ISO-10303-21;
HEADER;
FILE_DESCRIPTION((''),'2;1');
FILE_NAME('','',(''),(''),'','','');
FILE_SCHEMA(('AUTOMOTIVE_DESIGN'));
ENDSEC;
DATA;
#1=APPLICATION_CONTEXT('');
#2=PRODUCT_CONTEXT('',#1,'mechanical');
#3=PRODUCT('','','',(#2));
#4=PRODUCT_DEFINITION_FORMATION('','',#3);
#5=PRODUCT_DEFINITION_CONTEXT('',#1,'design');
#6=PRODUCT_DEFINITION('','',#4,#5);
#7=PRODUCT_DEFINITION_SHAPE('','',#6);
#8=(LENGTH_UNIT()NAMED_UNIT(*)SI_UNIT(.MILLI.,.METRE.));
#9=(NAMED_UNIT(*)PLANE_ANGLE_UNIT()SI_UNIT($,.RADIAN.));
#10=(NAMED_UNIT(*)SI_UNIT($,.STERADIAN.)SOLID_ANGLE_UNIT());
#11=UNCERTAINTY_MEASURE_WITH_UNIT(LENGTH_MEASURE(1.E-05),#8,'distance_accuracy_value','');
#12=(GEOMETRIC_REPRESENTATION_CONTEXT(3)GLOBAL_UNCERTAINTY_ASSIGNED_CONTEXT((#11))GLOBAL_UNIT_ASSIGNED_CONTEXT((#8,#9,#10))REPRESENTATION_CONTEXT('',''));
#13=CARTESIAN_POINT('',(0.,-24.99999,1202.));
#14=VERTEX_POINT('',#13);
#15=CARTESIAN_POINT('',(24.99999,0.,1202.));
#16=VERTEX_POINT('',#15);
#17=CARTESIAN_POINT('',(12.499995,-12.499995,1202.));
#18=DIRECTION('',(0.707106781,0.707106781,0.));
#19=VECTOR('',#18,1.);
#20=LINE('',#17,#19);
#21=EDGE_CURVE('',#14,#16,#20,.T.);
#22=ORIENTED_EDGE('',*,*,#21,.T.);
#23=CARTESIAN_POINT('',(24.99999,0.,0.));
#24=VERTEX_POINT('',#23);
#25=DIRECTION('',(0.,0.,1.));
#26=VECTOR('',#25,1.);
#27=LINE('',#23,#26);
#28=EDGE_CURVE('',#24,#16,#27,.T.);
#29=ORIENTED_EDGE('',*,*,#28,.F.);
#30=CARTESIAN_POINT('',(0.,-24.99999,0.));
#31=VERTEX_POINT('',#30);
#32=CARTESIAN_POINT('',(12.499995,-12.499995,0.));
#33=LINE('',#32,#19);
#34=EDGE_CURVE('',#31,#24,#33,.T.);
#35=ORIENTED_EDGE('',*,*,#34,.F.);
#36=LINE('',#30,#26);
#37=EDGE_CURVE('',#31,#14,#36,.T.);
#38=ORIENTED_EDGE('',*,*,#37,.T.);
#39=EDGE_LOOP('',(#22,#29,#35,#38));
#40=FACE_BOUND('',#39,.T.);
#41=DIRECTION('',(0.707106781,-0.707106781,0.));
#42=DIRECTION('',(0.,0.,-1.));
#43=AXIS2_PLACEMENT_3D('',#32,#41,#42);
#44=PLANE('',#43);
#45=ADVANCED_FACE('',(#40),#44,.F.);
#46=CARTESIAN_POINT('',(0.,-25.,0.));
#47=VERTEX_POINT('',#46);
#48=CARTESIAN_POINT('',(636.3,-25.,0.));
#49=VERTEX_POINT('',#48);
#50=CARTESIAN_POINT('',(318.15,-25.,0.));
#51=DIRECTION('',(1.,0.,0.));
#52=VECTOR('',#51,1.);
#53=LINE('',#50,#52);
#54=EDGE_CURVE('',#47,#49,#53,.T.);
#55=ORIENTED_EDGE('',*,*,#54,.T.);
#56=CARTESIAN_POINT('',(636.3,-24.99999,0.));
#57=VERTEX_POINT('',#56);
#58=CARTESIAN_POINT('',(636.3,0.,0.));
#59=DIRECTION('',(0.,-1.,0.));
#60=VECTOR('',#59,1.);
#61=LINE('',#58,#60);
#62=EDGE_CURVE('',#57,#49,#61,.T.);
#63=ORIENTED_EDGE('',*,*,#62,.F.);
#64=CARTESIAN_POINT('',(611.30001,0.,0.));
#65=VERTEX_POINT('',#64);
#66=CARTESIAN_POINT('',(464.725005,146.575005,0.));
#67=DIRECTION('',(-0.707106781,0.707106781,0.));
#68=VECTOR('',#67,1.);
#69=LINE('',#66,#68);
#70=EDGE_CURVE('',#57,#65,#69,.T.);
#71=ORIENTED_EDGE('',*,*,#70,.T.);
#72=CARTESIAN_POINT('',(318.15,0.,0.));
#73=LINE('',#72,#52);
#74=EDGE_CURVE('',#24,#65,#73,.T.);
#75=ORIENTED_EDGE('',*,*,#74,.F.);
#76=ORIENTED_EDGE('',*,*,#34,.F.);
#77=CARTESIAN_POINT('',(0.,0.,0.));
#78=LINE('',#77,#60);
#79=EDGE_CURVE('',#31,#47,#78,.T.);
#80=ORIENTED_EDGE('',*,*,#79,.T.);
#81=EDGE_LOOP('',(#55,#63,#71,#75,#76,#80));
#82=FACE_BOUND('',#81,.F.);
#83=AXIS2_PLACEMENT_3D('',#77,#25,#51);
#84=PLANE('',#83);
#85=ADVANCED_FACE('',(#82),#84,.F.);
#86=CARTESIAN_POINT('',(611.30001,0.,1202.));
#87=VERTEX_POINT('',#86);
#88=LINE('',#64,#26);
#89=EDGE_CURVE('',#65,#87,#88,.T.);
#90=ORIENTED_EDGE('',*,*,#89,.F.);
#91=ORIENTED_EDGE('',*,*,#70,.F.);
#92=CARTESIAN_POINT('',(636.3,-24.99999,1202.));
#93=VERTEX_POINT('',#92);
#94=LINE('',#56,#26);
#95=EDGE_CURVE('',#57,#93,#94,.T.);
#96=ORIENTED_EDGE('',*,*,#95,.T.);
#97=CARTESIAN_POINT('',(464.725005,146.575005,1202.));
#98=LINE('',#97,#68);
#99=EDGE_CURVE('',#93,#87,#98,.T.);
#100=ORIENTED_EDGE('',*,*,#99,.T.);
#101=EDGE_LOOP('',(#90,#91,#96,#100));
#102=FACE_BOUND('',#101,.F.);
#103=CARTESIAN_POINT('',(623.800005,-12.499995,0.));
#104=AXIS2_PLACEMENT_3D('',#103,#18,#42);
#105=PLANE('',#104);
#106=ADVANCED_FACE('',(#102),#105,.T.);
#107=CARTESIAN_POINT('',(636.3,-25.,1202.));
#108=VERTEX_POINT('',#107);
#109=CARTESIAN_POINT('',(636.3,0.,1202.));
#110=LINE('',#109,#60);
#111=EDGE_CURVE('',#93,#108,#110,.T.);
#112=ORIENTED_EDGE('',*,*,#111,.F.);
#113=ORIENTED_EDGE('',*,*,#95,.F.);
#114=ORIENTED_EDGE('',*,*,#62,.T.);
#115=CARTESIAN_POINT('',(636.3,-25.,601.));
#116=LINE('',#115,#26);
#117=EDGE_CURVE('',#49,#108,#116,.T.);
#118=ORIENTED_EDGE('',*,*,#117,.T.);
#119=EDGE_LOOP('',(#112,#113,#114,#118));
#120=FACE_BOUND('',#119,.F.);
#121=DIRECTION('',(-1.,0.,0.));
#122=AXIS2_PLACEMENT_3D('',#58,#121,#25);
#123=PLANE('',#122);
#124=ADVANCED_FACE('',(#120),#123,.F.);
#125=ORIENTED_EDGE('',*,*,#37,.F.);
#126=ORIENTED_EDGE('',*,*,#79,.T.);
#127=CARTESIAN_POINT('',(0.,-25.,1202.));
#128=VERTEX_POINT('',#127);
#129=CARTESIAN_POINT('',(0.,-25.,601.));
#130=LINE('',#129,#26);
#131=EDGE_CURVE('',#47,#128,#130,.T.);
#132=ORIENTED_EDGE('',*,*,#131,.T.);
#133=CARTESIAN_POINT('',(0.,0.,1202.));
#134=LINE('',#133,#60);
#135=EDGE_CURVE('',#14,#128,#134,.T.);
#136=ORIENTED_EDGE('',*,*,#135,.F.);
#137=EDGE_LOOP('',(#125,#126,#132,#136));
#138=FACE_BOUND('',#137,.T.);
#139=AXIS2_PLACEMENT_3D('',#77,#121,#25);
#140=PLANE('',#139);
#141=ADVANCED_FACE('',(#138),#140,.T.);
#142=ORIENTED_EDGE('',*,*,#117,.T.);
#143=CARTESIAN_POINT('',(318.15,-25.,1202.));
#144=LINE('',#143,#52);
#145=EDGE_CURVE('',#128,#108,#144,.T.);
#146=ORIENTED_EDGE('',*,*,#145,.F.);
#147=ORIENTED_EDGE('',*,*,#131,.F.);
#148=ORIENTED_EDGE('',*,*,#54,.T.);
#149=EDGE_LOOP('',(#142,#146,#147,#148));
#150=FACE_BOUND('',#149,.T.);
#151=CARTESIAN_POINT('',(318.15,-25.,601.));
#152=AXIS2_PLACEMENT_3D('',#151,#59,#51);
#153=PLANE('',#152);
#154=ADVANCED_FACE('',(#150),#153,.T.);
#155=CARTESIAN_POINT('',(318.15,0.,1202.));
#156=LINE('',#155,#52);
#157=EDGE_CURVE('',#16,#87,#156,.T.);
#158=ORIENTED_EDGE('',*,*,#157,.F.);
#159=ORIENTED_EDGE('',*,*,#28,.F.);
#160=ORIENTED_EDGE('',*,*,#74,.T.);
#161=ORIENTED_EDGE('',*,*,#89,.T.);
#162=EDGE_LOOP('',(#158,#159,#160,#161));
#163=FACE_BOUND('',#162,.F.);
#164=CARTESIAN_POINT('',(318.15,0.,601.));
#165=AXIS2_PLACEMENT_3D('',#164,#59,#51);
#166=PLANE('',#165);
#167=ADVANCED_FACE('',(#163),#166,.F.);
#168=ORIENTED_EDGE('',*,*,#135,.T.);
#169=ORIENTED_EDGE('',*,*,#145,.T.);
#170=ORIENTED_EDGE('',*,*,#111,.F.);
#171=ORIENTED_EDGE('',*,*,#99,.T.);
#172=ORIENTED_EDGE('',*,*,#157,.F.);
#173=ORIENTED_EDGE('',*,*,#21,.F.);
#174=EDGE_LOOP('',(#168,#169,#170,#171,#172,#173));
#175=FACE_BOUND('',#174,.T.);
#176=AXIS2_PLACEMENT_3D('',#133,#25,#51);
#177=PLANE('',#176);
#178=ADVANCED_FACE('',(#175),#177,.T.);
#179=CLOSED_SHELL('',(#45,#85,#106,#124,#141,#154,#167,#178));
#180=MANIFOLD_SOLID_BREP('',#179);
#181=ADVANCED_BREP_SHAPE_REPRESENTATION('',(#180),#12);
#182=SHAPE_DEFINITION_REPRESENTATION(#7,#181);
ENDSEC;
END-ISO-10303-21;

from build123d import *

# Parameters (mm, degrees)
F0_W     = 636.3
F0_H     = 1202
F1_DEPTH = 25
F2_SIZE  = 24.99999


# Not quite as in the source:
# - a fillet or chamfer is up to 0.001 mm smaller than in the source, because OpenCascade refuses the exact size


with BuildPart() as f1:
    # F0 (on Front) → F1 (new body)
    with BuildSketch(Plane.XZ):
        with Locations((318.15, 601)):
            Rectangle(F0_W, F0_H)
    extrude(amount=F1_DEPTH)

    # F2 (size 25 in the source; OpenCascade refuses exactly that, so slightly less here)
    f2_edges = [f1.edges().sort_by_distance(p)[0] for p in [
        (636.3, 0, 601),
        (0, 0, 601),
    ]]
    chamfer(f2_edges, length=F2_SIZE)


solid = f1.part
